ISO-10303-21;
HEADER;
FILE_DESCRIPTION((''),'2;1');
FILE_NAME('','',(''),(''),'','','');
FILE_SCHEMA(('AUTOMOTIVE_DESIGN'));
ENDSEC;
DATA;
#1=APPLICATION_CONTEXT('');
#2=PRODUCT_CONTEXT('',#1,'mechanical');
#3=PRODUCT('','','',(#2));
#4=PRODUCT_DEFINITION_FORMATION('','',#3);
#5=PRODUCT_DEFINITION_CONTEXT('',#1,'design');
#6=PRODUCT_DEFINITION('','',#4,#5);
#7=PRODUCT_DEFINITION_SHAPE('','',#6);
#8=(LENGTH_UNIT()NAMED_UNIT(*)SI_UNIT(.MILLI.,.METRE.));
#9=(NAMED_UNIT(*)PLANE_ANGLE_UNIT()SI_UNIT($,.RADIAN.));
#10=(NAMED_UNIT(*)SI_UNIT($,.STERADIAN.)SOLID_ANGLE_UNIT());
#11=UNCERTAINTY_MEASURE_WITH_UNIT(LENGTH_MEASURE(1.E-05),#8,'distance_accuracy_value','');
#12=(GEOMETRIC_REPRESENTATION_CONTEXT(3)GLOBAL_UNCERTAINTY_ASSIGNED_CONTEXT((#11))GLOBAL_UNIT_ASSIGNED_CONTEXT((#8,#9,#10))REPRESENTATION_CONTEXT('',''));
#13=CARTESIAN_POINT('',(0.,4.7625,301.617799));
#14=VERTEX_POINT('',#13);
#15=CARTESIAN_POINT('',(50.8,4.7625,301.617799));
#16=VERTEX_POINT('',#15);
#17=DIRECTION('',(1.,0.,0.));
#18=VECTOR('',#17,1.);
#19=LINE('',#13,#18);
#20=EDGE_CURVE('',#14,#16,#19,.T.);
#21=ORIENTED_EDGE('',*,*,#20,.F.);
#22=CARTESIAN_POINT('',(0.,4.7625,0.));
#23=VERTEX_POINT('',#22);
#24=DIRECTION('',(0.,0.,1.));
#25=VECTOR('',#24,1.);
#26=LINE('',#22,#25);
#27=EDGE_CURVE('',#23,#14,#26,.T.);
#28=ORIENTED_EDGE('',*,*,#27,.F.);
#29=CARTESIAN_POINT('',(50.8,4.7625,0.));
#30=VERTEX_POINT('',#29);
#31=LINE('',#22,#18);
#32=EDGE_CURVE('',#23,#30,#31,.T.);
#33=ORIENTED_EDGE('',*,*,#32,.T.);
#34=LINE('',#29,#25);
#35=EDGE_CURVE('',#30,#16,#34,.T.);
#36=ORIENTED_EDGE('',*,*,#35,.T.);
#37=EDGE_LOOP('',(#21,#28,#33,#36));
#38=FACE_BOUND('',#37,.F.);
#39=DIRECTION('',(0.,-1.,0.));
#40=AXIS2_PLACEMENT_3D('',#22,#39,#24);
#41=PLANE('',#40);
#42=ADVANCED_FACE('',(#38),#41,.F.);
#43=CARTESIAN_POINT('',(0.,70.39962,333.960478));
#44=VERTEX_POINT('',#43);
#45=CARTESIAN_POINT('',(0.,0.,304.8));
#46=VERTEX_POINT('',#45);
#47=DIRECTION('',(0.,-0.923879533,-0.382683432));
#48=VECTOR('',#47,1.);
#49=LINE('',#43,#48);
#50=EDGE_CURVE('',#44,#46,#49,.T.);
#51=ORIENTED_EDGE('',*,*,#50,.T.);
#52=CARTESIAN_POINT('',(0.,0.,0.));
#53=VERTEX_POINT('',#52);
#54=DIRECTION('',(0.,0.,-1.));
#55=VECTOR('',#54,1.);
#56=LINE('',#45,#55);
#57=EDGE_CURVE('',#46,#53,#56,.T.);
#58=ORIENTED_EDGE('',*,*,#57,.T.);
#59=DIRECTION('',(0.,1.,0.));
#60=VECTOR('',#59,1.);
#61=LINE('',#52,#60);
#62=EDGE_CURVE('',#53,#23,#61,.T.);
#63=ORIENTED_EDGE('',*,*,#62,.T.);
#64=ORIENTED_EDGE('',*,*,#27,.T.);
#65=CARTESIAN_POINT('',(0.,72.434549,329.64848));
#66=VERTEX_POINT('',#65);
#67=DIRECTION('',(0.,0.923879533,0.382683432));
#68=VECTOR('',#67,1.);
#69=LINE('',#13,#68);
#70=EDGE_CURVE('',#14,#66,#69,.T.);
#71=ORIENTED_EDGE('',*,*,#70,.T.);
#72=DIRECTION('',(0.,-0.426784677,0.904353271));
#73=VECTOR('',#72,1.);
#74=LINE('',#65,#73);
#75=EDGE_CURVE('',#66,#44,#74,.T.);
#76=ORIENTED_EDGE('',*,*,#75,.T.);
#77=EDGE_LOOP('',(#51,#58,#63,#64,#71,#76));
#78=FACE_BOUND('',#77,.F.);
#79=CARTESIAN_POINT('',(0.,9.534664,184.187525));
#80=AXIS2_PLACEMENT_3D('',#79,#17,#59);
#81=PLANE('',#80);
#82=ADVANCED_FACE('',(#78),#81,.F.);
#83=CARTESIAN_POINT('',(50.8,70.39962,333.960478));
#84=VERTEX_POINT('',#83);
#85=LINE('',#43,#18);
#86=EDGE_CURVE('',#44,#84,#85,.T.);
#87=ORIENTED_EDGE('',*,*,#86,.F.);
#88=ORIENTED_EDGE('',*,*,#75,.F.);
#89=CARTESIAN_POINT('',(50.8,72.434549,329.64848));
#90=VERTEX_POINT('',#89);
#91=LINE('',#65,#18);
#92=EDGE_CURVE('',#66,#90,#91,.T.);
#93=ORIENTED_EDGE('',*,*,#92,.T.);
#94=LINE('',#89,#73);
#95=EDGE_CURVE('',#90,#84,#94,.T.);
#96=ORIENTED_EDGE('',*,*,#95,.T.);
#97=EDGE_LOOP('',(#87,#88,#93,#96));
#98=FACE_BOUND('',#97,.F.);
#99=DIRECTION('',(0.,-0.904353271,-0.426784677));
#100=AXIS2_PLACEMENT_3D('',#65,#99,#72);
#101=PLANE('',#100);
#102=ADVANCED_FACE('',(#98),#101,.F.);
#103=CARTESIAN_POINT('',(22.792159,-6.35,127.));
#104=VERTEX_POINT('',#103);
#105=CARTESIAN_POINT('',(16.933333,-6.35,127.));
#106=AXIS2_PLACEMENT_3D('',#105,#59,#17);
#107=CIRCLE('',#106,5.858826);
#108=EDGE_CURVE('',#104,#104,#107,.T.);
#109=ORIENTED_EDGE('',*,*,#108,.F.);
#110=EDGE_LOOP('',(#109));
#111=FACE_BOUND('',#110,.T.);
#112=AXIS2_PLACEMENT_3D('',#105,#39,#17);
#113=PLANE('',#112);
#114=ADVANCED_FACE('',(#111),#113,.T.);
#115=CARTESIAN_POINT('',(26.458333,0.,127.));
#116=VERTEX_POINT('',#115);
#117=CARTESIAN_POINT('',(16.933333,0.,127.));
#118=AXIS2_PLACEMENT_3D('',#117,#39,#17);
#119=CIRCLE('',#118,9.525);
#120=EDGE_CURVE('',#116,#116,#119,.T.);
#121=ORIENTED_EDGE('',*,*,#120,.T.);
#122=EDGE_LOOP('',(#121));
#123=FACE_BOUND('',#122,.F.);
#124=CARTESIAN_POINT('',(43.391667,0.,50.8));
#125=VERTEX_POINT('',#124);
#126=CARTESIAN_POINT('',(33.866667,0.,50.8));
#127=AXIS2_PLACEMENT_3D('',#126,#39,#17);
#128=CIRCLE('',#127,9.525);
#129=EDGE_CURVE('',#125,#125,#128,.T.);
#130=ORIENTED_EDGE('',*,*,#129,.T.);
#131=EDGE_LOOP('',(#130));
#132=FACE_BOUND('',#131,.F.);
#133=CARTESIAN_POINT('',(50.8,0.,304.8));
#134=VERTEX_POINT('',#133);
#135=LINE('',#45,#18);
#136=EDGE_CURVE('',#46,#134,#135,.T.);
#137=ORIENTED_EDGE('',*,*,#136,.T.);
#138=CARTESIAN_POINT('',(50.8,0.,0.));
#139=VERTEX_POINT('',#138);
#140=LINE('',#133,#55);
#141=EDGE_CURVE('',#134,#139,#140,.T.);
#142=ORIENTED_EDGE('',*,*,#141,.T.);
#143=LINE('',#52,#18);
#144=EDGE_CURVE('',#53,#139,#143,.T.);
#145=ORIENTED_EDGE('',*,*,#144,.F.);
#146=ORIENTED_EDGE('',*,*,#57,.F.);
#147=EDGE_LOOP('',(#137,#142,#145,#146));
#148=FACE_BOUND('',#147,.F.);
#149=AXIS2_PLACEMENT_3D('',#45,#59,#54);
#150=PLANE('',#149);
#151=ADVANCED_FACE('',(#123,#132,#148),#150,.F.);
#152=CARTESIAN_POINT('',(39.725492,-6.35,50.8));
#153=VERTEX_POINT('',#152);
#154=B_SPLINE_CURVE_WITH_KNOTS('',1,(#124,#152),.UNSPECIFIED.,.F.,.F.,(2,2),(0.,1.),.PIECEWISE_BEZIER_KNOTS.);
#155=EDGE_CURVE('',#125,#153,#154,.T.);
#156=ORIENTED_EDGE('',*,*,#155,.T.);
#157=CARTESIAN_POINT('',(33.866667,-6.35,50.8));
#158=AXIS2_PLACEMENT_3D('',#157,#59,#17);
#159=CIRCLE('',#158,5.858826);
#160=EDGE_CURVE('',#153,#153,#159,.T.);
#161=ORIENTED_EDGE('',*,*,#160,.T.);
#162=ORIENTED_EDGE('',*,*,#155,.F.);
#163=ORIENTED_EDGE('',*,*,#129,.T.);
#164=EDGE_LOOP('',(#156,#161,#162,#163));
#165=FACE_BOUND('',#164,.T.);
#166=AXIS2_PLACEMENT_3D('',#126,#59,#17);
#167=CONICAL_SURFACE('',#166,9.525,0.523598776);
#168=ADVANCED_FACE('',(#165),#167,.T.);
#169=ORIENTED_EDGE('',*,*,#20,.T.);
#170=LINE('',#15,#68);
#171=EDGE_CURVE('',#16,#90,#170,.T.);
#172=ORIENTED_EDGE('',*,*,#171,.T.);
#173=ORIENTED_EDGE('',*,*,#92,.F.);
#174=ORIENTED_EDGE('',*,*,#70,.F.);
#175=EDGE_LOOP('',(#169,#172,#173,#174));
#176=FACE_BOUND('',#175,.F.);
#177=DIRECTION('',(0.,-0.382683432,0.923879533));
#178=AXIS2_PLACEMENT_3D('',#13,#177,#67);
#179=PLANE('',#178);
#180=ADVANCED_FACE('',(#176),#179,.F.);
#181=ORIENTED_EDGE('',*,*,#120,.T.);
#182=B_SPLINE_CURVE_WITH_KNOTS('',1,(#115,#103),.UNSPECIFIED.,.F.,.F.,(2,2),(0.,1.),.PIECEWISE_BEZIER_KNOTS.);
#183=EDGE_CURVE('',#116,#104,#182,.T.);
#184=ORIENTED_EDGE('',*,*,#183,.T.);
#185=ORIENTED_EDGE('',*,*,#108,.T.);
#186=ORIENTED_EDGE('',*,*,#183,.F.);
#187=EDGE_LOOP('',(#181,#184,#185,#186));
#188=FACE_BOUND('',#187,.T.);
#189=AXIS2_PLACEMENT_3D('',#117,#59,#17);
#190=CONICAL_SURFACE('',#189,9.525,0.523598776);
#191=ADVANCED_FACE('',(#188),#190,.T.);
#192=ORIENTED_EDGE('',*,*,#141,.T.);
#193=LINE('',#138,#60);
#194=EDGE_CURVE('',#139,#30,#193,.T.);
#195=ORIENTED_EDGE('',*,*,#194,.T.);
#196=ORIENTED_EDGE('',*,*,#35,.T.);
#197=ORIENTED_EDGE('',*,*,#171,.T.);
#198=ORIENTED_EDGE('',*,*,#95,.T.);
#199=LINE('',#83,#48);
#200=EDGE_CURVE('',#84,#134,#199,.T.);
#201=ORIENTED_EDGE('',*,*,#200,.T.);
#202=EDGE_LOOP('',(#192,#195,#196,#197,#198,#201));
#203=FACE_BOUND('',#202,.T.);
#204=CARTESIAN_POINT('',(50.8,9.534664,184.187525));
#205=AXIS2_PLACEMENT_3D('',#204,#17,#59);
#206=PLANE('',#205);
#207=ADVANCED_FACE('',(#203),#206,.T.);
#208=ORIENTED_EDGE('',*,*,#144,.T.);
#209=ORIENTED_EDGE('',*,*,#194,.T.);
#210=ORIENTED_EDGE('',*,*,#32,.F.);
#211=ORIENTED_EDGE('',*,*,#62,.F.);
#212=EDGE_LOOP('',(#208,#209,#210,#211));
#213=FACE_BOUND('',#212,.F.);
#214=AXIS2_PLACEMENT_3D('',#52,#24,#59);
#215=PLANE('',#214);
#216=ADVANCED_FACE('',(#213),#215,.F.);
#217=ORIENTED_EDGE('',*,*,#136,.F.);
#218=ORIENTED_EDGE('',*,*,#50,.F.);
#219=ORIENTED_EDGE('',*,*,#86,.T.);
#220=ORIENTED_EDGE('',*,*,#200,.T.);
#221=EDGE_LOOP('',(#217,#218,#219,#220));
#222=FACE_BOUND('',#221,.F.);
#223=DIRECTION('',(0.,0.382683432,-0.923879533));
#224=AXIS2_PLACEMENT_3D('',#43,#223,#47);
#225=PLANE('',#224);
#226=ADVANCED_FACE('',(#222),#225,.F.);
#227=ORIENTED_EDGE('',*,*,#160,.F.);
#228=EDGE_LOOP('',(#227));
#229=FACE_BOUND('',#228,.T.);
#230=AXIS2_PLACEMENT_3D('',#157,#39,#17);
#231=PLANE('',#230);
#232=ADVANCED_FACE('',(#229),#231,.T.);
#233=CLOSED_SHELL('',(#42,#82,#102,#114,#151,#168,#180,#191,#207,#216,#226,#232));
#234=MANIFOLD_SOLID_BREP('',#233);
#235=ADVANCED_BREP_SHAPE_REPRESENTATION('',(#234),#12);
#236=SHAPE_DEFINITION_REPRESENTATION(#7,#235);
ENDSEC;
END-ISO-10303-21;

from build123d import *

# Parameters (mm, degrees)
F1_DEPTH = 50.8
F2_R     = 9.525
F3_DEPTH = 6.35
F3_TAPER = 30


# Not quite as in the source:
# - a feature names something its author has since deleted; it is built from what else it names


with BuildPart() as f1:
    # F0 (on Right) → F1 (new body)
    with BuildSketch(Plane.YZ):
        Polygon((0, 304.8), (0, 0), (4.7625, 0), (4.7625, 301.6177992369), (72.4345492237, 329.6484798189), (70.3996203774, 333.9604775462), align=None)
    extrude(amount=F1_DEPTH)

    # F2 (on face) → F3 (join)
    with BuildSketch(Plane.XZ):
        with Locations((16.9333333333, 127)):
            Circle(F2_R)
        with Locations((33.8666666667, 50.8)):
            Circle(F2_R)
    extrude(amount=F3_DEPTH, taper=F3_TAPER)


solid = f1.part
